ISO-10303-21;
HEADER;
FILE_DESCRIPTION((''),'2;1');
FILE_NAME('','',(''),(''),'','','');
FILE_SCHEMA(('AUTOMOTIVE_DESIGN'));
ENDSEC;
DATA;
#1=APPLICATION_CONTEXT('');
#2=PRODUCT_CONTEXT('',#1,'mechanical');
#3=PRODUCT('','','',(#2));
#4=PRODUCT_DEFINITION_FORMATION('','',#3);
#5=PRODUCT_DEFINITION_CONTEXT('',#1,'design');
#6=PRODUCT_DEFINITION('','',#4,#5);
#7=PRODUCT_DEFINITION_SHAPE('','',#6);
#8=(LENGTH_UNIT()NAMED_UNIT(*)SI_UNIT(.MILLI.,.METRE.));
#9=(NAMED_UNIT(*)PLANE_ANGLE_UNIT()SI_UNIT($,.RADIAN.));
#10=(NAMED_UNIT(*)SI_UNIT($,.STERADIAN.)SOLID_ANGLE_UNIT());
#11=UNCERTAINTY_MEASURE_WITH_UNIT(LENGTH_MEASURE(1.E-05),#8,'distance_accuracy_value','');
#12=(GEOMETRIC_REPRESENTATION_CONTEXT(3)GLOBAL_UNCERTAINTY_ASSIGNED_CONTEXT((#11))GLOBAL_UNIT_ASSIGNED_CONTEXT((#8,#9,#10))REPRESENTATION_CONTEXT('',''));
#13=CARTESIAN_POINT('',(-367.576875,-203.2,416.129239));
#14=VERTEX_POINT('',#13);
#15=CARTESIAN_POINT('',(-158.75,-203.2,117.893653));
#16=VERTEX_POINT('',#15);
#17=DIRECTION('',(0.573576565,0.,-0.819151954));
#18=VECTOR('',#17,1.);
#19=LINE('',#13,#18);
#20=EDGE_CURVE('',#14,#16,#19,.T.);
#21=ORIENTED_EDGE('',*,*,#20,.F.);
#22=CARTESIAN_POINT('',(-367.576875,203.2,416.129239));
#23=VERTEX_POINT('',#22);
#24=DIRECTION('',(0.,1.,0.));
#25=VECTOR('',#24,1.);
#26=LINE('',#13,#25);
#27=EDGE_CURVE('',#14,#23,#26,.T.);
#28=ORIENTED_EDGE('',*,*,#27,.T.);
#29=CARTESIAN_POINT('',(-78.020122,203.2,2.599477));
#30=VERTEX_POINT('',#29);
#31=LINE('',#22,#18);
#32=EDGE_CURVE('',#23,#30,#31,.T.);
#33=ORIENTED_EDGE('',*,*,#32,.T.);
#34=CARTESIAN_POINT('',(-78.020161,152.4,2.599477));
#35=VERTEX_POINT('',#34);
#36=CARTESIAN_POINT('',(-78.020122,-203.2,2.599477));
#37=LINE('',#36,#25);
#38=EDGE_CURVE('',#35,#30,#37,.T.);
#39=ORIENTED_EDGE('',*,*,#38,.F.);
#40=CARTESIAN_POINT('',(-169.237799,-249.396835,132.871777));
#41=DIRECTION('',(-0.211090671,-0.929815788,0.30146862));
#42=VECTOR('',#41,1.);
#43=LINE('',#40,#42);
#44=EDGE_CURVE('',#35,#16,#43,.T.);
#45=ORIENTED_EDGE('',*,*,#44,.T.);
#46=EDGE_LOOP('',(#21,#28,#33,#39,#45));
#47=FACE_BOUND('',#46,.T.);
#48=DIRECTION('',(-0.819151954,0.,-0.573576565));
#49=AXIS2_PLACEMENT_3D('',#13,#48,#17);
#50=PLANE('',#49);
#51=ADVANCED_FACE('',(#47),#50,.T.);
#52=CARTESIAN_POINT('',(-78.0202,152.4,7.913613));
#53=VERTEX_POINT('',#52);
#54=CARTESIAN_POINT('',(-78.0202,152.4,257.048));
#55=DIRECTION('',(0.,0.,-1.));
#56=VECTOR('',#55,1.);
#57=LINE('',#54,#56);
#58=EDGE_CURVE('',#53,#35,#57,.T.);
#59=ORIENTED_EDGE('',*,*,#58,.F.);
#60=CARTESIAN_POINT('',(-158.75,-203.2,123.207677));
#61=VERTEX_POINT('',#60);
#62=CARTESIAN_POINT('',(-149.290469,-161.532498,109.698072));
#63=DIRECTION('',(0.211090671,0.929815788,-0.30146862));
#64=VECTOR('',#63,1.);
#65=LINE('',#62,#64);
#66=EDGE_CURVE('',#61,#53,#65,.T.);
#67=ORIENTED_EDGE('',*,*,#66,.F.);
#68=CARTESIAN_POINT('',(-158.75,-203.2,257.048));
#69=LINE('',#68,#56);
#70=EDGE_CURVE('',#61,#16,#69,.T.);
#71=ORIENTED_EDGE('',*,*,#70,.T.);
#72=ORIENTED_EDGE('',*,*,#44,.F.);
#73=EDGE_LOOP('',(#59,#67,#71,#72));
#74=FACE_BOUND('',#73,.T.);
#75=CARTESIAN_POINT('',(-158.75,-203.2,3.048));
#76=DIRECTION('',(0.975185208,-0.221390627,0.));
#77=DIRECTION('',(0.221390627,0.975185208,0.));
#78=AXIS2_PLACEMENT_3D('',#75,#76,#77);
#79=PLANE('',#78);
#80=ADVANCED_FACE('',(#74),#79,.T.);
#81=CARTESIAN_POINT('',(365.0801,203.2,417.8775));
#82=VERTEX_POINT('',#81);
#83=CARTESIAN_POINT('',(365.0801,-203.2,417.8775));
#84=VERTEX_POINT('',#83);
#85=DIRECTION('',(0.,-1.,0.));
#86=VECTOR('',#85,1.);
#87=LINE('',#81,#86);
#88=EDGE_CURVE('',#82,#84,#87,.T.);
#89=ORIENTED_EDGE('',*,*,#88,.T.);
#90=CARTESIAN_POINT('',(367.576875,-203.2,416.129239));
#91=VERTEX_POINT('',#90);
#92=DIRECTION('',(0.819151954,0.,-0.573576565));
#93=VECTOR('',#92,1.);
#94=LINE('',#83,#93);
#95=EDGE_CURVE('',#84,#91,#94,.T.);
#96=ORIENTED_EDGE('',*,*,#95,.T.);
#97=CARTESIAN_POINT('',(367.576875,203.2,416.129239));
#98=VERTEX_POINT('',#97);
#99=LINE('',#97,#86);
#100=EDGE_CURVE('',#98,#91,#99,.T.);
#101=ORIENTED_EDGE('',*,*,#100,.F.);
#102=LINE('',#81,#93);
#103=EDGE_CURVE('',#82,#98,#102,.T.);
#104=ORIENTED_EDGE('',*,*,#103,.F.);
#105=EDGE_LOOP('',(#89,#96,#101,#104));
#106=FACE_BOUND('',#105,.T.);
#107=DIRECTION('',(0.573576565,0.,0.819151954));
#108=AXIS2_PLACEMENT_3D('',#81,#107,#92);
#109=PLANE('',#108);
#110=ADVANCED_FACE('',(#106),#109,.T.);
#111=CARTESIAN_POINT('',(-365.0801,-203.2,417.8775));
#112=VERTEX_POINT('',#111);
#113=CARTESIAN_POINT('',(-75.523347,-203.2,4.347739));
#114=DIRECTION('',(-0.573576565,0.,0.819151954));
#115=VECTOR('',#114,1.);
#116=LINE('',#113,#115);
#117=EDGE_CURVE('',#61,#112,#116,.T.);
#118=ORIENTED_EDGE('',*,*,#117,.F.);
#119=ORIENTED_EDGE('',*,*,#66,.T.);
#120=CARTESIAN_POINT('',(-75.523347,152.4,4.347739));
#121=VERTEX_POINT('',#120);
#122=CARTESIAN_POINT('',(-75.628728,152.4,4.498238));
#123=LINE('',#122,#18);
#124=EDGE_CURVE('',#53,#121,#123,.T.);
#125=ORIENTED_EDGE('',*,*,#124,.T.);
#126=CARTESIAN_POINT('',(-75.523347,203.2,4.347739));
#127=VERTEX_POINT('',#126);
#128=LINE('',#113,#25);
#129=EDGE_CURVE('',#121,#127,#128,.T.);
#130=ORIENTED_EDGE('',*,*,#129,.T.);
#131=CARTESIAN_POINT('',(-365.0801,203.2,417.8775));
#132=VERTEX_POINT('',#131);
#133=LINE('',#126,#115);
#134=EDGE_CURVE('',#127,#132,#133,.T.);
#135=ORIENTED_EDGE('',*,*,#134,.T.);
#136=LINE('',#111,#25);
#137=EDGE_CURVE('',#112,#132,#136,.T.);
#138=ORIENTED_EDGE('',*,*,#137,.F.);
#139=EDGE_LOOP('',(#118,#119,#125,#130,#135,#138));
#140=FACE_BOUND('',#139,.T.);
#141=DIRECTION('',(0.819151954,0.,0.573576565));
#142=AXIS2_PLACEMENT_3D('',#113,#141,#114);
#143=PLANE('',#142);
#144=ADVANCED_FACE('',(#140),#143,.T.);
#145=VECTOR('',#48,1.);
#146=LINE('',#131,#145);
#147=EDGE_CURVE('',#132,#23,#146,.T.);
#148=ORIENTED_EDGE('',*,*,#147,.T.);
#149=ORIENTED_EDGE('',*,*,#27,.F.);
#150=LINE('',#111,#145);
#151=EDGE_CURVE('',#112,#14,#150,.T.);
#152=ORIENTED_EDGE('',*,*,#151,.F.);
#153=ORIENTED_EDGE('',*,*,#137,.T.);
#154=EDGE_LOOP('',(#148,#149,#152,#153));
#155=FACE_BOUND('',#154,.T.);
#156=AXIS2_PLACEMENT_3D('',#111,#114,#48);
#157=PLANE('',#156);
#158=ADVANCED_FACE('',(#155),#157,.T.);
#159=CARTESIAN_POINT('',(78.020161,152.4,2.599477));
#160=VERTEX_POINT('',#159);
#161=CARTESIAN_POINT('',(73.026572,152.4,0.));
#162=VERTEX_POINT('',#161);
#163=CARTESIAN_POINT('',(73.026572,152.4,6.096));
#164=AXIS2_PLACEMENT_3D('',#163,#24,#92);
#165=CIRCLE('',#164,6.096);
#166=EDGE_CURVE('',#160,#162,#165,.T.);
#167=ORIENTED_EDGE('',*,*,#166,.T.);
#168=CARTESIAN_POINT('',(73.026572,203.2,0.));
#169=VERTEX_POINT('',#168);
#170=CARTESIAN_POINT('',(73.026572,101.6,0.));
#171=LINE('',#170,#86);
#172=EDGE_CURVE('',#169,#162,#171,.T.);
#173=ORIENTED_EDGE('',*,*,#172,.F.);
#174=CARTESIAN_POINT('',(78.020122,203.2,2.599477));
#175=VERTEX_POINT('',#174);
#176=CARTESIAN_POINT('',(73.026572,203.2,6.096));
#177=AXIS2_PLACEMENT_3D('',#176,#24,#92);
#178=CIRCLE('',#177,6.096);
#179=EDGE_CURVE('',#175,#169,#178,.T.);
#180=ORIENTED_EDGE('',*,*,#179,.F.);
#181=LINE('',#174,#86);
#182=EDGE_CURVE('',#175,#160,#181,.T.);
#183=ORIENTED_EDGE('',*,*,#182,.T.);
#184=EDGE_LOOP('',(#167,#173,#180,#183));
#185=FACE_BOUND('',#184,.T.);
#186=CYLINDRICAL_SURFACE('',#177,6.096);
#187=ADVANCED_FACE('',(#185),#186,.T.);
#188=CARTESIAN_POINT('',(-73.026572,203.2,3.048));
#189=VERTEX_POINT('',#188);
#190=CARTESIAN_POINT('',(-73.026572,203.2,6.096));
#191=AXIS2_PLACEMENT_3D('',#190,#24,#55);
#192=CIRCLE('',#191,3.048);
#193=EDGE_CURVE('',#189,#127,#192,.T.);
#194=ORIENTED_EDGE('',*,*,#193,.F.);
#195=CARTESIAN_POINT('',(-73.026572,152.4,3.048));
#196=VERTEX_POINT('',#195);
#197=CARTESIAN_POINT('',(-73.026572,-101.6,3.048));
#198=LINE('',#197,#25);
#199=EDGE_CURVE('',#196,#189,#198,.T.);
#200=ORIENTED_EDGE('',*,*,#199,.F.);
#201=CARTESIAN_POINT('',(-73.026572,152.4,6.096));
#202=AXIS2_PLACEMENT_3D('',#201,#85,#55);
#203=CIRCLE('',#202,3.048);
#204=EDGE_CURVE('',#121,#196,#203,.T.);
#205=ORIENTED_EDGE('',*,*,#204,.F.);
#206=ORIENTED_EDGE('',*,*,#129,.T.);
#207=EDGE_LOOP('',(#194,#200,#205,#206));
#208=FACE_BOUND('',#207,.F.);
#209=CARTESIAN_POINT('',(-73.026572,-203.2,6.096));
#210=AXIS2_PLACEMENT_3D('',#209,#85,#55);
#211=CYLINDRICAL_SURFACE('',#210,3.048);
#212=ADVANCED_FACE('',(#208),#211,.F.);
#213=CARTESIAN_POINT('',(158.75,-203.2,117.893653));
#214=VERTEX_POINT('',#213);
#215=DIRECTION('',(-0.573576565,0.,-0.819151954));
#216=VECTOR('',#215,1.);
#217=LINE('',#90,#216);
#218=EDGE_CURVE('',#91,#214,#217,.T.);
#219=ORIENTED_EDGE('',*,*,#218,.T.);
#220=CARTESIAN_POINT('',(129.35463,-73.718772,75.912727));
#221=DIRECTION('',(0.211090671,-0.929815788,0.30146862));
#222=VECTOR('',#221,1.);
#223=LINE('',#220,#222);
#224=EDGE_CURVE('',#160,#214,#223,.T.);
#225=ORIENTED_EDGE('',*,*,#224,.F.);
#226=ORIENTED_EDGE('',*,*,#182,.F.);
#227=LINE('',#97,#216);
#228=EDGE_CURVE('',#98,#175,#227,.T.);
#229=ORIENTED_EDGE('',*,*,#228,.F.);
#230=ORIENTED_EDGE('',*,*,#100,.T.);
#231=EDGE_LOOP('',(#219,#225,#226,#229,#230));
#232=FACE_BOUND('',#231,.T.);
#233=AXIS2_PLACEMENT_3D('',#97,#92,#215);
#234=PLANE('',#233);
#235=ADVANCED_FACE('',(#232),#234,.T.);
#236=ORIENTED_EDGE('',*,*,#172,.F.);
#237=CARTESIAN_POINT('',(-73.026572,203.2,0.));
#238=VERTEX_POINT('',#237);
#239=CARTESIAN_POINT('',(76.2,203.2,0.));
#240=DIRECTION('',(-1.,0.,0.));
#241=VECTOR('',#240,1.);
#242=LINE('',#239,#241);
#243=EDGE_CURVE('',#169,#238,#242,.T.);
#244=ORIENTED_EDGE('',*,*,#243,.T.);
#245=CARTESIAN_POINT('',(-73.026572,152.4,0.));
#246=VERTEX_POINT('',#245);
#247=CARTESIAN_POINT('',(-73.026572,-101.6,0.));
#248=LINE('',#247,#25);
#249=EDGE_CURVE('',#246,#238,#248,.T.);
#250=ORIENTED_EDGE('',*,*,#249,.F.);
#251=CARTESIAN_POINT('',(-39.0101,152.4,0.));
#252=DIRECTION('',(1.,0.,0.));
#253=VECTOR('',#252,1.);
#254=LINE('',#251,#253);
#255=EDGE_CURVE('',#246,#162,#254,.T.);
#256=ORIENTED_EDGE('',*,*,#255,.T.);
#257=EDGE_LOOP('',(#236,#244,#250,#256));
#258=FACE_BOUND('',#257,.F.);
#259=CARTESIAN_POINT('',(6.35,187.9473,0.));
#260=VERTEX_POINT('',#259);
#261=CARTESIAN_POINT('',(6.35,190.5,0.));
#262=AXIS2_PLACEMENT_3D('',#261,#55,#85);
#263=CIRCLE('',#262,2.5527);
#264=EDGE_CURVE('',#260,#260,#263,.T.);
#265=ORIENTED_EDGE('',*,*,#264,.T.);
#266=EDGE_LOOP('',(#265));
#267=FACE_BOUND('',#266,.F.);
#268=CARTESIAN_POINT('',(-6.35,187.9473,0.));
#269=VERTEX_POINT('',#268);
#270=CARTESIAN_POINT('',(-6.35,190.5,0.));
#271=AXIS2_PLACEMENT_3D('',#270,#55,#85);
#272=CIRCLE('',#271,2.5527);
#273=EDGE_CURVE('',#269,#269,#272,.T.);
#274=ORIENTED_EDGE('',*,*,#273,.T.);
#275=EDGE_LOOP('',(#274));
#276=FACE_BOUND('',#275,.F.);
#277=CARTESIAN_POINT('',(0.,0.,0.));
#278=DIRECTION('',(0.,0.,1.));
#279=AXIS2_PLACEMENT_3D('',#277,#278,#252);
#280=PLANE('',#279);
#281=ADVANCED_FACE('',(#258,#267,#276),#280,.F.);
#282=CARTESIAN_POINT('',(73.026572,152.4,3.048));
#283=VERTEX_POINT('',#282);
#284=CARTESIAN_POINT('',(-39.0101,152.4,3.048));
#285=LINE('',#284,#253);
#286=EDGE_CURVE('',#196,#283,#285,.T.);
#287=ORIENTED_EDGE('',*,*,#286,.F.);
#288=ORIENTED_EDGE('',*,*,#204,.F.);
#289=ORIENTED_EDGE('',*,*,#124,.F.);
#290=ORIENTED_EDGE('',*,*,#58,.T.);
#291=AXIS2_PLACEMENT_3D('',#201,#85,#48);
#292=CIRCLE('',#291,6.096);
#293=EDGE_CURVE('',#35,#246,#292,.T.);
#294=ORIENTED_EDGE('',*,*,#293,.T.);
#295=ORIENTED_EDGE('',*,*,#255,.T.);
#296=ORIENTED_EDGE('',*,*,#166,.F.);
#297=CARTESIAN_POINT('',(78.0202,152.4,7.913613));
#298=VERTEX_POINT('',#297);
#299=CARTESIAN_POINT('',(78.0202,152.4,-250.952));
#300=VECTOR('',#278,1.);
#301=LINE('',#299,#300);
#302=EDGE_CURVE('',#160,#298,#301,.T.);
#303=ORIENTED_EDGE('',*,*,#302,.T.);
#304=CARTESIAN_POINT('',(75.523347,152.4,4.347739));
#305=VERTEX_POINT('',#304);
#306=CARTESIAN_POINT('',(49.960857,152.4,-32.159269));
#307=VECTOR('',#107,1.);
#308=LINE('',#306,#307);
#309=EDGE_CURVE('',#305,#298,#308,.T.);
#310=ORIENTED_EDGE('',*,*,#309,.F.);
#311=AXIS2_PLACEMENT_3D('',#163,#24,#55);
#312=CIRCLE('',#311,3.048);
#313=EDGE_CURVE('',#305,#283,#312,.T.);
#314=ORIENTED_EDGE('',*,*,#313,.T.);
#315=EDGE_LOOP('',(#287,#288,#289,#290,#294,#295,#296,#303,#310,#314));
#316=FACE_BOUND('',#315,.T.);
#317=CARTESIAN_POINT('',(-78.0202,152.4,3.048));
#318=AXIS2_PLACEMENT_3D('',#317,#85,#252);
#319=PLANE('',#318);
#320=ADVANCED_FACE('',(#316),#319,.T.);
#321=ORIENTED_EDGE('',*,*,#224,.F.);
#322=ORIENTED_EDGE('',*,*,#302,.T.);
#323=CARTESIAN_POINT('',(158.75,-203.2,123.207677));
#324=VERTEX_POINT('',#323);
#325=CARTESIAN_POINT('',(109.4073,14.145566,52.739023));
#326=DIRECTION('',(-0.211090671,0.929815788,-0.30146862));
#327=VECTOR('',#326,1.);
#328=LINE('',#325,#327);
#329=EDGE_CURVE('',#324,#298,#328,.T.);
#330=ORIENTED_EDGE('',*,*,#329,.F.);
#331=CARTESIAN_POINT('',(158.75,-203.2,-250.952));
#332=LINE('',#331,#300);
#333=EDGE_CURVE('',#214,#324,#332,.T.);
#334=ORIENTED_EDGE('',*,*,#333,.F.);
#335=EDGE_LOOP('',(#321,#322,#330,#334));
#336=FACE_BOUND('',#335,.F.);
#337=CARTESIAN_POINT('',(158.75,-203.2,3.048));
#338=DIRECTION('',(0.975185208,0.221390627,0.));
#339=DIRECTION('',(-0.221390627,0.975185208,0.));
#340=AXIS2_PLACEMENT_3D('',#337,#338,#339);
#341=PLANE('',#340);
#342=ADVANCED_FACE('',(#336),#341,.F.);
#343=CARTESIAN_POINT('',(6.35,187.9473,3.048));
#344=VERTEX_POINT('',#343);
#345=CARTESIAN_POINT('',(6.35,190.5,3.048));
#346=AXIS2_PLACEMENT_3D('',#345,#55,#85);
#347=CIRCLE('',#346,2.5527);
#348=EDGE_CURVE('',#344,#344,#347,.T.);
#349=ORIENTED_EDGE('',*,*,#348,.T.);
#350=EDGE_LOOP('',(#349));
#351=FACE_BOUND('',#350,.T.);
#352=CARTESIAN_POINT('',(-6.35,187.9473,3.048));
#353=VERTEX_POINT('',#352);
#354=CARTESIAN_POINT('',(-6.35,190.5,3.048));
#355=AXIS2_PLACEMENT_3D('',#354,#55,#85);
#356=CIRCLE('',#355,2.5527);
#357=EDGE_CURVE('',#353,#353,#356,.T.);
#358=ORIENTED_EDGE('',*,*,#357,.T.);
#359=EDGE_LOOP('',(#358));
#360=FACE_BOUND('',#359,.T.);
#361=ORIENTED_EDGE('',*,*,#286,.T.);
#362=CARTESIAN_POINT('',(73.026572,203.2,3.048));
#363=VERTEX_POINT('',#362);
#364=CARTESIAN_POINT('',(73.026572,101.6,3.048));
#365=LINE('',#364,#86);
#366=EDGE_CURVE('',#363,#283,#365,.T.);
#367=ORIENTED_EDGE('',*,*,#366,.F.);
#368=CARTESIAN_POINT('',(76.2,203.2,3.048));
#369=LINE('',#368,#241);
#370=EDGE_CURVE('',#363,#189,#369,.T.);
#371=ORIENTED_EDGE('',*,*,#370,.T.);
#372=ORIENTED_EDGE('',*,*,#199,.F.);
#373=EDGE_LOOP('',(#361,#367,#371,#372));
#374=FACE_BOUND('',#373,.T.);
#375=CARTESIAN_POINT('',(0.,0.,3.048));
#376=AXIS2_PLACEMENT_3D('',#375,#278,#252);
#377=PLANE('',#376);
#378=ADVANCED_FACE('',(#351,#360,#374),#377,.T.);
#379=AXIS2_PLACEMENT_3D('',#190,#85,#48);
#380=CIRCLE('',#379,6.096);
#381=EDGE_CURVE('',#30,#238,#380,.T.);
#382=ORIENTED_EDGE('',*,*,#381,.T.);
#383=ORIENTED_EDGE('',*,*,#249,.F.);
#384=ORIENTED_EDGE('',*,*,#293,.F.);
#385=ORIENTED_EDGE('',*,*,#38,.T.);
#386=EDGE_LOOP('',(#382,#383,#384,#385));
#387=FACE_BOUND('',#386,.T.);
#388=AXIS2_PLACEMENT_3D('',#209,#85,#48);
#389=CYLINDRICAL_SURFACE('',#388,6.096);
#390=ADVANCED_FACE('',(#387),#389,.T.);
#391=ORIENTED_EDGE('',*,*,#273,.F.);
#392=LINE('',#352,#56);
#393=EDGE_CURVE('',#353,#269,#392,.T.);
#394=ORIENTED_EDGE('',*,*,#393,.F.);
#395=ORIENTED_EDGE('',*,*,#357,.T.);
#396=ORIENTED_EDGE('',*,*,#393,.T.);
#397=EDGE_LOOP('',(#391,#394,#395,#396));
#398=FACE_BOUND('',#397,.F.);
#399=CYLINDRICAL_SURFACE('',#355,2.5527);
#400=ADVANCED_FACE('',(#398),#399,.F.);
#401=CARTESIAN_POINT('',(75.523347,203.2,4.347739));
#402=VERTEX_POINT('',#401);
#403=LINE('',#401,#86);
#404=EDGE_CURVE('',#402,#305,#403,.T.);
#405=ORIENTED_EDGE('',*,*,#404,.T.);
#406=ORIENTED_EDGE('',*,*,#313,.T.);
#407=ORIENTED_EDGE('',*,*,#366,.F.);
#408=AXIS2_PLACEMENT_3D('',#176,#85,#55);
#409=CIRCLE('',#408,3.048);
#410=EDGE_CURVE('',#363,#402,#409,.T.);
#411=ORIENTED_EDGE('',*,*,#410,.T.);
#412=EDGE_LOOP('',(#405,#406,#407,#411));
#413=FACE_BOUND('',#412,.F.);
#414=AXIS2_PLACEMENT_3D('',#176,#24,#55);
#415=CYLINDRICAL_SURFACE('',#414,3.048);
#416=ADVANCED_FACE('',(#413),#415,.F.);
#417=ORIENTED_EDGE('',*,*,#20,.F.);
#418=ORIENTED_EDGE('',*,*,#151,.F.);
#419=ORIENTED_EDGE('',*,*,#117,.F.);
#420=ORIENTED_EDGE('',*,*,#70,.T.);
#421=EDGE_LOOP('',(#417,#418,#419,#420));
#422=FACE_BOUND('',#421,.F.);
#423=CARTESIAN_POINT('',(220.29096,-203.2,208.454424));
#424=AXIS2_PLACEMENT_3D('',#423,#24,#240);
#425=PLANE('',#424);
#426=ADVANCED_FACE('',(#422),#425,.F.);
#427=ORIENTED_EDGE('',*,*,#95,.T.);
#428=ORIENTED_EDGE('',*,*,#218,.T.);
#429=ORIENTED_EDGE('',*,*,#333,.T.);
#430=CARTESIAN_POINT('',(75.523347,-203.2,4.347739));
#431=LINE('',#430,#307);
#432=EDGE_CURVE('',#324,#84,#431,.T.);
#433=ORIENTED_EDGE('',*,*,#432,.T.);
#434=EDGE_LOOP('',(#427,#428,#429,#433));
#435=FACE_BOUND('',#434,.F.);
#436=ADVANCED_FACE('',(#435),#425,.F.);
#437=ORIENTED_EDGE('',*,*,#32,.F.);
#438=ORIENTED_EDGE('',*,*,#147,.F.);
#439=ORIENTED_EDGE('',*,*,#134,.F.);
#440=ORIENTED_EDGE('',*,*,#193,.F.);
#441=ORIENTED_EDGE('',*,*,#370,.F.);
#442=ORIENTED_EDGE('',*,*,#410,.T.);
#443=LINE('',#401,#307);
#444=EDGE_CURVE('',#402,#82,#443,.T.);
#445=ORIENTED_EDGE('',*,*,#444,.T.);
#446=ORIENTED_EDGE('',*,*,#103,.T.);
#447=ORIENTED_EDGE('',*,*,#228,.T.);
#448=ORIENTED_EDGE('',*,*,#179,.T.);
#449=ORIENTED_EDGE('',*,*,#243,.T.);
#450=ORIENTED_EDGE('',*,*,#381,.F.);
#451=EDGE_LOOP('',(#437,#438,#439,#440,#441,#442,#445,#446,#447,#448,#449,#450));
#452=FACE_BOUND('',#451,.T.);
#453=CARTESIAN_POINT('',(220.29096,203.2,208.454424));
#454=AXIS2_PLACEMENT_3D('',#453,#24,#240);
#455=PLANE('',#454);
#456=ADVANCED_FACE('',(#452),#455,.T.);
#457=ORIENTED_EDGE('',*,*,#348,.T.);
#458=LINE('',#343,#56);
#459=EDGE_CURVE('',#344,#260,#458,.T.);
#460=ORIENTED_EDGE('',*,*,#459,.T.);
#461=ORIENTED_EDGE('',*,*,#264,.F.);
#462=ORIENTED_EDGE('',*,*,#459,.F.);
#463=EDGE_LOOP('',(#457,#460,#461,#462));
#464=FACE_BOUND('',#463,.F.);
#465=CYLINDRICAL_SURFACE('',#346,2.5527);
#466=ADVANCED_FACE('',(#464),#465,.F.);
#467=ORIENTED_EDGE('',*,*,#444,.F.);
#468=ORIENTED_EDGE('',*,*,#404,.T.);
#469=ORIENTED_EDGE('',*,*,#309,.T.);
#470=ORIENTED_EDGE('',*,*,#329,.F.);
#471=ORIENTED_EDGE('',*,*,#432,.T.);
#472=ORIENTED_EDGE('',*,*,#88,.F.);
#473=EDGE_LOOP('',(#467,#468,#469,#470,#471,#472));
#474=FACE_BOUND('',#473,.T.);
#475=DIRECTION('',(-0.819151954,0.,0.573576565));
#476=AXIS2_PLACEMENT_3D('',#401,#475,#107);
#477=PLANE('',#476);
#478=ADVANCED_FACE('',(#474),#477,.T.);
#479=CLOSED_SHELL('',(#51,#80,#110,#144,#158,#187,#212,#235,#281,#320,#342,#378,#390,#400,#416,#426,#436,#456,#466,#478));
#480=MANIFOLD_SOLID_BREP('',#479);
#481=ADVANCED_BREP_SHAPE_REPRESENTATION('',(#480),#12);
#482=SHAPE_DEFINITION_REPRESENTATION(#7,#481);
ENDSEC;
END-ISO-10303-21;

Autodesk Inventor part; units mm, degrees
ref_plane "YZ Plane" through (0, 0, 0) normal (1, 0, 0) x (0, 1, 0)
ref_plane "XZ Plane" through (0, 0, 0) normal (0, 1, 0) x (-1, 0, 0)
ref_plane "XY Plane" through (0, 0, 0) normal (0, 0, 1) x (1, 0, 0)
sketch "Sketch1" plane through (0, 0, 0) normal (0, 0, 1) x (1, 0, 0)
  line L0 (-76.2, -203.2) -> (76.2, -203.2)
  line L1 (76.2, -203.2) -> (76.2, 203.2)
  line L2 (76.2, 203.2) -> (-76.2, 203.2)
  line L3 (-76.2, 203.2) -> (-76.2, -203.2)
  line L4 (-76.2, -203.2) -> (76.2, 203.2) construction
  line L5 (76.2, -203.2) -> (-76.2, 203.2) construction
  point P0 (0, 0)
  dimension "d0" = 152.4
  dimension "d1" = 406.4
extrude "Plate1" add sketch "Sketch1" along normal blind 3.048
sketch "Sketch2" plane through (73.7032, 203.2, 1.7483) normal (0.819152, 0, -0.5735764) x (0, 1, 0)
  line L0 (-406.4, 0) -> (0, 0)
  line L1 (0, 0) -> (0, 508)
  line L2 (0, 508) -> (-406.4, 508)
  line L3 (-406.4, 508) -> (-406.4, 0)
edge flange "Flange1" height 508 angle 55 thickness 3.048 bend radius 3.048 thickness toward (0.819152, 0, -0.5735764) relief tear relief width 3.048 relief depth 1.524 corner gap 3.048 corner form 0 edges at (76.2, 0, 3.048) (-76.2, 0, 3.048) wall of the first edge with corners at (73.7032, -203.2, 1.7483) (73.7032, 203.2, 1.7483) (365.0801, 203.2, 417.8775) (365.0801, -203.2, 417.8775)
bend "Bend1"
corner "Corner1"
sketch "Sketch3" plane through (0, 0, 3.048) normal (0, 0, 1) x (1, 0, 0)
  line L0 (-78.0202, -203.2) -> (-78.0202, 152.4)
  line L1 (-78.0202, 152.4) -> (78.0202, 152.4)
  line L2 (78.0202, 152.4) -> (78.0202, -203.2)
  line L3 (-158.75, -203.2) -> (-78.0202, 152.4)
  line L4 (158.75, -203.2) -> (78.0202, 152.4)
  line L5 (-75.5234, -203.2) -> (-365.0801, -203.2) projected
  line L6 (75.5234, -203.2) -> (365.0801, -203.2) projected
  line L7 (-158.75, -203.2) -> (158.75, -203.2)
  line L8 (-78.0202, 203.2) -> (-78.0202, -203.2) construction
  line L9 (78.0202, -203.2) -> (78.0202, 203.2) projected
  line L10 (-73.0266, 203.2) -> (73.0266, 203.2) projected
  line L11 (73.0266, -203.2) -> (-73.0266, -203.2) projected
  point P0 (0, -203.2)
  point P1 (0, -203.2)
  dimension "d25" = 317.5
  dimension "d28" = 50.8
extrude "Cut1" cut sketch "Sketch3" against normal mid plane 508
sketch "Sketch4" plane through (0, 0, 3.048) normal (0, 0, 1) x (1, 0, 0)
  line L0 (-73.0266, 152.4) -> (73.0266, 152.4) construction
  line L1 (73.0266, 152.4) -> (73.0266, 203.2) construction
  line L2 (-73.0266, 203.2) -> (73.0266, 203.2) construction
  line L3 (-73.0266, 203.2) -> (-73.0266, 152.4) construction
  line L4 (0, 203.2) -> (0, 152.4) construction
  line L5 (0, 190.5) -> (6.35, 190.5)
  point P0 (0, 0)
  point P1 (-6.35, 190.5)
  dimension "d16" = 6.35
  dimension "d17" = 12.7
hole "Hole1" at (6.35, 190.5, 3.048) at (-6.35, 190.5, 3.048) direction (0, 0, -1) diameter 5.1054 end through all clearance for "Flat Head Machine Screw (82)" size "#10" standard "Ansi Unified Screw Threads"
equation "\"d23\" = Thickness"
equation "\"d2\" = Thickness"
equation "\"d3\" = BendReliefWidth"
equation "\"d4\" = BendReliefDepth"
equation "\"d5\" = MinimumRemnant"
equation "\"d6\" = TransitionRadius"
equation "\"d9\" = BendRadius"
equation "\"d10\" = CornerReliefSize"
equation "\"d11\" = GapSize"
equation "\"d12\" = JacobiRadiusSize"
equation "\"BendRadius\" = Thickness"
equation "\"BendReliefWidth\" = Thickness"
equation "\"BendReliefDepth\" = 0.5 * Thickness"
equation "\"CornerReliefSize\" = 4 * Thickness"
equation "\"MinimumRemnant\" = 2 * Thickness"
equation "\"TransitionRadius\" = BendRadius"
equation "\"JacobiRadiusSize\" = BendRadius"
equation "\"GapSize\" = Thickness"
equation "\"Thickness\" = 3.048"
properties part number "hopper" material "Polycarbonate, Smoke"
